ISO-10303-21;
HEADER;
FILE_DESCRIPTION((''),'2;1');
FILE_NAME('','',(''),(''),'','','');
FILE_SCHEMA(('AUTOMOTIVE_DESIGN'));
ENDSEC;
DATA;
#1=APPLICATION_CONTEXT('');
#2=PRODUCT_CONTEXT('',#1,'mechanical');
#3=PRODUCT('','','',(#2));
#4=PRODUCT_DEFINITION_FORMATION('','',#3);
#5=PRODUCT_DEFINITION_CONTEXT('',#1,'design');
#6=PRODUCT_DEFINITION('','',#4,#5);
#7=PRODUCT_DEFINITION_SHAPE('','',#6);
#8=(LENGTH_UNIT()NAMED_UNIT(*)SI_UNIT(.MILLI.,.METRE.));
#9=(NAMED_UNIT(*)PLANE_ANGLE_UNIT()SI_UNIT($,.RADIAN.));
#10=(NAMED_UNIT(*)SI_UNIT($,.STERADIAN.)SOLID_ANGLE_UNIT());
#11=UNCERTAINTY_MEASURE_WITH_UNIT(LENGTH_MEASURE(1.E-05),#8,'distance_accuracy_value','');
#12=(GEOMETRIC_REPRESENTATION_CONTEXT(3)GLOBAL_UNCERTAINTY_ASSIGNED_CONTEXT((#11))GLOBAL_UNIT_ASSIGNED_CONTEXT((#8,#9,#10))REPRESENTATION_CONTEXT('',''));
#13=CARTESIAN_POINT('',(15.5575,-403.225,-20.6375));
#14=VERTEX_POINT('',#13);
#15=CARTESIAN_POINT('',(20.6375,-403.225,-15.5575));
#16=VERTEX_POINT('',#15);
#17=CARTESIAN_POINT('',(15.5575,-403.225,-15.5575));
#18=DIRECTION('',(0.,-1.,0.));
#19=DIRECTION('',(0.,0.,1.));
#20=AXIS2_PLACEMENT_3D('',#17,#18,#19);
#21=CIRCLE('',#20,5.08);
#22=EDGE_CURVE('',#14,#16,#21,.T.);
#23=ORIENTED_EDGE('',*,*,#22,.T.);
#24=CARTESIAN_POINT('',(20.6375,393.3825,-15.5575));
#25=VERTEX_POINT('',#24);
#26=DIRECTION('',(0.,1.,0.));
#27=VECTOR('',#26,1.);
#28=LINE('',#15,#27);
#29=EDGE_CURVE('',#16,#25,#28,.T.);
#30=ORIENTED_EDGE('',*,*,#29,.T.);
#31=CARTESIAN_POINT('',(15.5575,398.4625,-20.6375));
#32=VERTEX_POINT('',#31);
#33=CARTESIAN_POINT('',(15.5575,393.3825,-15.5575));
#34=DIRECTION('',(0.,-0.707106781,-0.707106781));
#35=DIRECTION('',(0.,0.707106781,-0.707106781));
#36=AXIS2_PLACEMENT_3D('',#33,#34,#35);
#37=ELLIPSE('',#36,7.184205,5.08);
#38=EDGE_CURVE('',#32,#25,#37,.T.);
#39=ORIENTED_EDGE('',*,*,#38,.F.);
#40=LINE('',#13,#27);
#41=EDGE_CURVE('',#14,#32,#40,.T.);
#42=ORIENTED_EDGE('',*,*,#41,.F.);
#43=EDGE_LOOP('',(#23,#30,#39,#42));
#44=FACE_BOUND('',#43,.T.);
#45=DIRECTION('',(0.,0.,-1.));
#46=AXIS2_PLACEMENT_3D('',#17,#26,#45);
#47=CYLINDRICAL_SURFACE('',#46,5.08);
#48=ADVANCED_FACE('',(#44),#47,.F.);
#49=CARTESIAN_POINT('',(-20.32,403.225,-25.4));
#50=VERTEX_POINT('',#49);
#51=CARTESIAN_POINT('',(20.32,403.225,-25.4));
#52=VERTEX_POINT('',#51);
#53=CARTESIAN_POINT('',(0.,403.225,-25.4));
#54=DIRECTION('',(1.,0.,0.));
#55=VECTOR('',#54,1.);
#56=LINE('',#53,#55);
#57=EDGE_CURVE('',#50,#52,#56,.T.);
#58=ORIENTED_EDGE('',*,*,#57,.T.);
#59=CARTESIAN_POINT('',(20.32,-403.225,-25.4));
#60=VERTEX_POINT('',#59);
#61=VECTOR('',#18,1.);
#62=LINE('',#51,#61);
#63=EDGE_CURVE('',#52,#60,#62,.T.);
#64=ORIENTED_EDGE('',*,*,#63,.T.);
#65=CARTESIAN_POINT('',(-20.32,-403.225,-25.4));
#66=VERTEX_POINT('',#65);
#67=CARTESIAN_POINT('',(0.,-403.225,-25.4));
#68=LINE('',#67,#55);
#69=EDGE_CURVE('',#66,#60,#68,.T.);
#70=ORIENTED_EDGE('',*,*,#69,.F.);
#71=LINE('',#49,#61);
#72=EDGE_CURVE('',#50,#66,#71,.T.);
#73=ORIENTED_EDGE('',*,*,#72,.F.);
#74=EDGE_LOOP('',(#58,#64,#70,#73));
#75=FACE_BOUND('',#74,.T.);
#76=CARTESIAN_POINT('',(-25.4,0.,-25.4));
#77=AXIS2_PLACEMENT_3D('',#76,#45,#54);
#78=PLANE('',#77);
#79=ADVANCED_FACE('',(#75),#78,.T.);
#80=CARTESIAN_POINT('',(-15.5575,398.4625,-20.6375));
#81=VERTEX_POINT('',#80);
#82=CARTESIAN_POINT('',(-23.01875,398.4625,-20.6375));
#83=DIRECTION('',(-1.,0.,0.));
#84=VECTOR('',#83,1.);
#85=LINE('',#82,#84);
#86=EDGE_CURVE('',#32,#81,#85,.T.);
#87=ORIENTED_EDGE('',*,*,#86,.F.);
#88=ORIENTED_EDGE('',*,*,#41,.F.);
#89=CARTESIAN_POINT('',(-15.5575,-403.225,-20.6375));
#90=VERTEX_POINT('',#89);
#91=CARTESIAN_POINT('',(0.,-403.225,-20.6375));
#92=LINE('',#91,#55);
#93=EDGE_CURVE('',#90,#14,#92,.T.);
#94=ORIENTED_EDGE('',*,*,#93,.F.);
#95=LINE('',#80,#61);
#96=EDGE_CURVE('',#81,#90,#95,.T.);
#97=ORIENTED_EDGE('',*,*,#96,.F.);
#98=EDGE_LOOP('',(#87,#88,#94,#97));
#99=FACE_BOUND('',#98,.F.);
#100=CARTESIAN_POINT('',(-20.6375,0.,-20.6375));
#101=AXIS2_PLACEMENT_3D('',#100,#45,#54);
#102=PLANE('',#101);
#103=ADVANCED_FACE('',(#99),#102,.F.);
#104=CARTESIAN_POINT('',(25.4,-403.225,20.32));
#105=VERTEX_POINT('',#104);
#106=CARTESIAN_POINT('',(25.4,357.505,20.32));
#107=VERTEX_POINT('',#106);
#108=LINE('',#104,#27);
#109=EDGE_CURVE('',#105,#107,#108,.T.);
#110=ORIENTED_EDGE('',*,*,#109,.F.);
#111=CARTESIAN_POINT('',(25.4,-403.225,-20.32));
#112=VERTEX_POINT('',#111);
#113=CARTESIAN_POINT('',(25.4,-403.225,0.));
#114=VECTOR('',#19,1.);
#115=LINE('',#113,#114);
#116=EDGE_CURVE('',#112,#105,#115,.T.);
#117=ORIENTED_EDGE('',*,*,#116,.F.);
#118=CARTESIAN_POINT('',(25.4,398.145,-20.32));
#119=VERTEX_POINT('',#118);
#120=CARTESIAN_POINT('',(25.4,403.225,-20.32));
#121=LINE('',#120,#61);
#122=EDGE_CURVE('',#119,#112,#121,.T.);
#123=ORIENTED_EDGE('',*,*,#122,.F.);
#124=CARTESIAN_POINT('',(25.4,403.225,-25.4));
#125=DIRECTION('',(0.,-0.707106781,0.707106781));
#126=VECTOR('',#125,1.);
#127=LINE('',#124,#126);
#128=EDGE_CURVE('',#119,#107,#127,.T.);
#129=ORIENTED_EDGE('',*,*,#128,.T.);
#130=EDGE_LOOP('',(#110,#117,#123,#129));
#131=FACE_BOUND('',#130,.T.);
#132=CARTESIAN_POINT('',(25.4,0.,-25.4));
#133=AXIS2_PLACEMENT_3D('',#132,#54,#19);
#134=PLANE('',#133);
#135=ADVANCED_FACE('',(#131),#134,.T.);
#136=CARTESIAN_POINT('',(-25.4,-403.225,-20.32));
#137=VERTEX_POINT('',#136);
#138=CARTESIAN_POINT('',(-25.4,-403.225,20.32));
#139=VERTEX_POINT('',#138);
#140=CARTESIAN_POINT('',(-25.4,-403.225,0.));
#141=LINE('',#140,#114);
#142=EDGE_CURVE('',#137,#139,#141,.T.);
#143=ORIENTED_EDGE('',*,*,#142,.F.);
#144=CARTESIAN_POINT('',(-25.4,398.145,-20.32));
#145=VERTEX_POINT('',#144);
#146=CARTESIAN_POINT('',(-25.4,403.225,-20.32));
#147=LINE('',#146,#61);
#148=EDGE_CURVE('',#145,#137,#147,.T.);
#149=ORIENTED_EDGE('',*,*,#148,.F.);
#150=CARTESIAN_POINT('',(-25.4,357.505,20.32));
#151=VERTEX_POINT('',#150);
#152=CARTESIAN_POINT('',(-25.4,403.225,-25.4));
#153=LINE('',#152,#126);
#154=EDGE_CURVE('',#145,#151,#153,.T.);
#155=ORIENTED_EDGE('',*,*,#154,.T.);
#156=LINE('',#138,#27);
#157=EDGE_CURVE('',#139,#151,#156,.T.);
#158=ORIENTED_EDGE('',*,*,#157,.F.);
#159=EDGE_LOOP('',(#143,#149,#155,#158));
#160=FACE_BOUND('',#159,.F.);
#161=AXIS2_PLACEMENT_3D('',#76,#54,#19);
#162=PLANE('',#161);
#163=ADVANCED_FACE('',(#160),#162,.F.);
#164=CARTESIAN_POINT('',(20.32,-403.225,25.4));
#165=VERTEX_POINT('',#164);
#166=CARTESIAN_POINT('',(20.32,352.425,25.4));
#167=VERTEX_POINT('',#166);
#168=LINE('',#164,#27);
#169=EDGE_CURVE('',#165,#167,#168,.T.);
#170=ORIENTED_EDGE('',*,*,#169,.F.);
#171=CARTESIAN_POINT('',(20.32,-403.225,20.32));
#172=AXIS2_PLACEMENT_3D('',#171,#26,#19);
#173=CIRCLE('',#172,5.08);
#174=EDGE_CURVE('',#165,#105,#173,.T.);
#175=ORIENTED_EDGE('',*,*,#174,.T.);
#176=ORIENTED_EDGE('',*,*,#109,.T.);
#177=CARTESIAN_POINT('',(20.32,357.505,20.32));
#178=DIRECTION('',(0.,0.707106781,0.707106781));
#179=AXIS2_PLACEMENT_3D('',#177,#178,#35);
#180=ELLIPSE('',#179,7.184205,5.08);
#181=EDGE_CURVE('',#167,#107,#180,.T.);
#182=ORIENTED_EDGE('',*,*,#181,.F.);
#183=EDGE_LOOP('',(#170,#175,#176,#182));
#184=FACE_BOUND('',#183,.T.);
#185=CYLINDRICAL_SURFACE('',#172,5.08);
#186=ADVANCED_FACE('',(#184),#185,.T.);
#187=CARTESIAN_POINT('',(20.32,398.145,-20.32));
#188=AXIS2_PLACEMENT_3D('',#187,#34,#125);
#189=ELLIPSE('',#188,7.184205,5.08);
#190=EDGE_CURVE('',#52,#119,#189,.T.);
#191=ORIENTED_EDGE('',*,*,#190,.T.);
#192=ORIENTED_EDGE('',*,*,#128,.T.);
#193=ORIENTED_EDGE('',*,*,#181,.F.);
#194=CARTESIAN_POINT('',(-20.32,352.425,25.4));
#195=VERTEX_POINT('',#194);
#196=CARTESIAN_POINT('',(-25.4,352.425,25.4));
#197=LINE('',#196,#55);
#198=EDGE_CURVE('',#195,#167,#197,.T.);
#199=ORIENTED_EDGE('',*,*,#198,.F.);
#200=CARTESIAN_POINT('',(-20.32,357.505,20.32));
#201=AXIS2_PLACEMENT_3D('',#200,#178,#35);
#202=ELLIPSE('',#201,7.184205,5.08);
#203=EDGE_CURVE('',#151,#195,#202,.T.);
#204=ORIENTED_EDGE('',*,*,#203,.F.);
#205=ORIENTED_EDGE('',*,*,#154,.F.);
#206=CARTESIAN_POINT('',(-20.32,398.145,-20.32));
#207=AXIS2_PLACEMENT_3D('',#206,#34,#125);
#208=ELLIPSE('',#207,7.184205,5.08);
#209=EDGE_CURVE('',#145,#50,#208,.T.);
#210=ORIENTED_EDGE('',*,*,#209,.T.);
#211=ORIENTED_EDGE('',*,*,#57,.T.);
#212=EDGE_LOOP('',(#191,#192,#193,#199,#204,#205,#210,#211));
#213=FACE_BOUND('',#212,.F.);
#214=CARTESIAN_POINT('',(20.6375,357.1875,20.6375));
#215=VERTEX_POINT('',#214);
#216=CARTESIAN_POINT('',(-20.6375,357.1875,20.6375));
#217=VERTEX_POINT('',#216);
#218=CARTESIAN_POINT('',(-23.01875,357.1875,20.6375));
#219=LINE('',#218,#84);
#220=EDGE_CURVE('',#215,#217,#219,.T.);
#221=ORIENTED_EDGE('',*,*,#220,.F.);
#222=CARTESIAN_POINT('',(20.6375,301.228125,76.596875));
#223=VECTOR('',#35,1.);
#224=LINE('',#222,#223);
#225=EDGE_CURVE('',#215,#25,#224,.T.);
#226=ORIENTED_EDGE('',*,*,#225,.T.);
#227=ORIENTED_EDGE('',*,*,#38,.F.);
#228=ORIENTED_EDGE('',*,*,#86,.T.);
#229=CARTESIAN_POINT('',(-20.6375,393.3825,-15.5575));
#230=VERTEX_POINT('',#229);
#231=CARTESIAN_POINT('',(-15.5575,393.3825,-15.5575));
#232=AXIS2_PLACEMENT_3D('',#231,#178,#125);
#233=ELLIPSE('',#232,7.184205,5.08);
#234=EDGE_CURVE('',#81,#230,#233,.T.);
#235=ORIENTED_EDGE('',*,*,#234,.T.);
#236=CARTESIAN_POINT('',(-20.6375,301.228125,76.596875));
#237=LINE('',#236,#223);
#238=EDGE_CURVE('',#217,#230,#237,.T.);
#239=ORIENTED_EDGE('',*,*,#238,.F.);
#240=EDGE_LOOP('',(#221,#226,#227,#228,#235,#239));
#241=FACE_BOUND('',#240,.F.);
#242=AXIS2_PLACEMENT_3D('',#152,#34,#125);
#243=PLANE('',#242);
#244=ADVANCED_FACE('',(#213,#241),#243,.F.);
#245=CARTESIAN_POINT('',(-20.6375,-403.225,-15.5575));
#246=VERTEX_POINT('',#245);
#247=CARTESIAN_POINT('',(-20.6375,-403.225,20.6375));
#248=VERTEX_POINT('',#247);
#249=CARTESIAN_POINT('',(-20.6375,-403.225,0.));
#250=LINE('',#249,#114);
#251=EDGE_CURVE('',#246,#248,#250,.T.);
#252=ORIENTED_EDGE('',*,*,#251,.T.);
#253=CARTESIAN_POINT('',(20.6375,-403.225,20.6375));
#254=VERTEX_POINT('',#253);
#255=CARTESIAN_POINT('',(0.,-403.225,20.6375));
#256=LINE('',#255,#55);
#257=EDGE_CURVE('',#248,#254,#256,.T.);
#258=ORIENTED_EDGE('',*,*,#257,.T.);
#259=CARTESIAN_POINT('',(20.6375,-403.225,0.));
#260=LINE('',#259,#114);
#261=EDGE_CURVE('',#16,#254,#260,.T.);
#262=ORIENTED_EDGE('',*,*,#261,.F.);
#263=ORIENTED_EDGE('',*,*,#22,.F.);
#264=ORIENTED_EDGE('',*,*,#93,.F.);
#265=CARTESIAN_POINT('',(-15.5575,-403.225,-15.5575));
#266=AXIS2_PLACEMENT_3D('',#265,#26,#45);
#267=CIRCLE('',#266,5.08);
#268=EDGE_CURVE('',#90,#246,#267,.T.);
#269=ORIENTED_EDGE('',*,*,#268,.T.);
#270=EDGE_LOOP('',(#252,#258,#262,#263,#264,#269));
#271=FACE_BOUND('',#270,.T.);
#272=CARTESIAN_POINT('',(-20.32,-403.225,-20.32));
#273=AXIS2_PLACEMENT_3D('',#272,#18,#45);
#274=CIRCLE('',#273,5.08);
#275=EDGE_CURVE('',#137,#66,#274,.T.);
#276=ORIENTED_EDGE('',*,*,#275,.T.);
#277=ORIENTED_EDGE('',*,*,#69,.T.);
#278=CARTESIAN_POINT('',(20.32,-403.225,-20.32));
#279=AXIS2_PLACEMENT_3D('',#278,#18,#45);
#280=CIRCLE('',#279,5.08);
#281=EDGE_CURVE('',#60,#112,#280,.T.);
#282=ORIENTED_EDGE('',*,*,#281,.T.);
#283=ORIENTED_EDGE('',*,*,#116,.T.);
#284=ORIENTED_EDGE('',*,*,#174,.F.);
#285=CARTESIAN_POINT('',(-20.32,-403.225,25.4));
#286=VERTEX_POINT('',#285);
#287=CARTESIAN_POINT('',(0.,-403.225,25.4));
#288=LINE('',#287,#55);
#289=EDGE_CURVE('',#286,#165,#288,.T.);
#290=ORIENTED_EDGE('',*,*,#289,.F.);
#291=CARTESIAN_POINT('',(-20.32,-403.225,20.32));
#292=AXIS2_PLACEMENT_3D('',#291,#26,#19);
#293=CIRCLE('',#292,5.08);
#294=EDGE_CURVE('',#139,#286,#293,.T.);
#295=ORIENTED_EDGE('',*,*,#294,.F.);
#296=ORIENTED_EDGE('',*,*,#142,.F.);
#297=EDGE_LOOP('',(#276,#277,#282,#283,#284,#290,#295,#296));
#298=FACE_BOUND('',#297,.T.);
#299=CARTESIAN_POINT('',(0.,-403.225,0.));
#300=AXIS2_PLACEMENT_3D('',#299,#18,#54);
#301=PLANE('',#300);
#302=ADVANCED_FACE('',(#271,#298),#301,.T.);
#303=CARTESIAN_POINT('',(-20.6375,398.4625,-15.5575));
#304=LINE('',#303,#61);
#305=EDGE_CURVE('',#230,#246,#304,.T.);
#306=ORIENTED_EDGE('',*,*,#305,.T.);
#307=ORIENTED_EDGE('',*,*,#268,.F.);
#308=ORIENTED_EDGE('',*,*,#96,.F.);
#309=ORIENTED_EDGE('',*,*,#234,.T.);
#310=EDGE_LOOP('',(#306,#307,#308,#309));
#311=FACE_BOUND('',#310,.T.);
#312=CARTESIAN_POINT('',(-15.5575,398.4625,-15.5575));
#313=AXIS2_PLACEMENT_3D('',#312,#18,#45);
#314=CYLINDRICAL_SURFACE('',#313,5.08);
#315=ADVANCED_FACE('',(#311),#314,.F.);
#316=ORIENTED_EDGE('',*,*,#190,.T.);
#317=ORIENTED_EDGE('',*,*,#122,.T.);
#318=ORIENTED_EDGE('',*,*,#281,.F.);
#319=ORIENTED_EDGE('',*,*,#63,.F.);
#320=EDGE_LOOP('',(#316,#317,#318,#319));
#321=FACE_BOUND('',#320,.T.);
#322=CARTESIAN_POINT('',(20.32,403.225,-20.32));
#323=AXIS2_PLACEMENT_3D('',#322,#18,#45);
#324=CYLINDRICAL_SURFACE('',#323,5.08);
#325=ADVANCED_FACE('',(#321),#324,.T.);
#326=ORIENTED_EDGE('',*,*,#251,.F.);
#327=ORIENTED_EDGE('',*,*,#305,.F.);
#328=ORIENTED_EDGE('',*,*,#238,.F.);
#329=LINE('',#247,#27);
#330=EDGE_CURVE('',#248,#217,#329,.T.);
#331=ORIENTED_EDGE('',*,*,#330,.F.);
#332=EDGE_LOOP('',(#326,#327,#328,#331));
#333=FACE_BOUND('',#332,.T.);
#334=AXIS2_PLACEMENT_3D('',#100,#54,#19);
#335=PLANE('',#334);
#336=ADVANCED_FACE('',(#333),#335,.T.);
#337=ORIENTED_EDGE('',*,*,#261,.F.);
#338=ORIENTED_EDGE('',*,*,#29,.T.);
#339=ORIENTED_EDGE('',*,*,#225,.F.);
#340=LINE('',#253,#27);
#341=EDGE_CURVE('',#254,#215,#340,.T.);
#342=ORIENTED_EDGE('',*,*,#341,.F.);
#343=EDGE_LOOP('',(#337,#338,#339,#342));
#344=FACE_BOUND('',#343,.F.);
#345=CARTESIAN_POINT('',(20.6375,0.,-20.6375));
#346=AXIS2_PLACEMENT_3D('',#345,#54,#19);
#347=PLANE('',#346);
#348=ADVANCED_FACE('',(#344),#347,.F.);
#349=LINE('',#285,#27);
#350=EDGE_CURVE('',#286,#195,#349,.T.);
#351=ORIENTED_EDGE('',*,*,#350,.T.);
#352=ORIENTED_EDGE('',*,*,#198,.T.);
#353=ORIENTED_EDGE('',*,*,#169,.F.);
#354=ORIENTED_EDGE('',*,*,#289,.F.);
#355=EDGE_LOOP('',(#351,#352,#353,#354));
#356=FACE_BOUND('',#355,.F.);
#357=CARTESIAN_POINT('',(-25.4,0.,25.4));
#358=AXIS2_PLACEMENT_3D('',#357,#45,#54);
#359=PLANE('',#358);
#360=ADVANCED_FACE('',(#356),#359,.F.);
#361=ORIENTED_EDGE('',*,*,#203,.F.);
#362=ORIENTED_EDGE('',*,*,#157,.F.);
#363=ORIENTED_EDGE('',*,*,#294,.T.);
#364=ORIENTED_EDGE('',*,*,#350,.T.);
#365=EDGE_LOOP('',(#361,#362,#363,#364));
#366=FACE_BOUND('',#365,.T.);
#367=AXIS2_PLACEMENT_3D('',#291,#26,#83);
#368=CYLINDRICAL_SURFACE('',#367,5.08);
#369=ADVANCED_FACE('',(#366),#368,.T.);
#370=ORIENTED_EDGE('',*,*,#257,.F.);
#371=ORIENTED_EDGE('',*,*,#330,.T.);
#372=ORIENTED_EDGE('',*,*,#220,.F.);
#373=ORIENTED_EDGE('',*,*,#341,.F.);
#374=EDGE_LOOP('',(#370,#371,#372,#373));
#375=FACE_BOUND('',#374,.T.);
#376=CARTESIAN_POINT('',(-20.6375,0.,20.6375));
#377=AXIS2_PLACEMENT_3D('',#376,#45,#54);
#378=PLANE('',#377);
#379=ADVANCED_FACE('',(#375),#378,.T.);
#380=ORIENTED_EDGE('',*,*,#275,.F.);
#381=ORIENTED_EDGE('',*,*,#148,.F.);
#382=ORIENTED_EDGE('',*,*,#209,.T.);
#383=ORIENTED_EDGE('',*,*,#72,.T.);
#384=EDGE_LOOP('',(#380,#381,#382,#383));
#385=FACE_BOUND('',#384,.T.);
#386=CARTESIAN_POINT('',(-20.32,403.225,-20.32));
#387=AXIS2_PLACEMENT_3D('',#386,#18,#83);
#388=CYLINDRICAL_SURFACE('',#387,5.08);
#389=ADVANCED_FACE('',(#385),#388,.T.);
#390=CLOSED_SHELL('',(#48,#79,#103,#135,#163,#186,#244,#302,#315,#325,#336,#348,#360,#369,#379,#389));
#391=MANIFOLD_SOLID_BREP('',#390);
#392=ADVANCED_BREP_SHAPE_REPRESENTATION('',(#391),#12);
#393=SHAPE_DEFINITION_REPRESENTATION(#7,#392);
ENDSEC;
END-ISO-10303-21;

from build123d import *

# Parameters (mm, degrees)
F0_W     = 50.8
F0_H     = 50.8
F0_W_2   = 41.275
F0_H_2   = 41.275
F1_DEPTH = 403.225
F3_DEPTH = 50.8
F4_R     = 5.08


with BuildPart() as f1:
    # F0 (on Front) → F1 (new body, symmetric)
    with BuildSketch(Plane.XZ):
        Rectangle(F0_W, F0_H)
        Rectangle(F0_W_2, F0_H_2, mode=Mode.SUBTRACT)
    extrude(amount=F1_DEPTH, both=True)

    # F2 (on face) → F3 (cut)
    with BuildSketch(Plane(origin=(-25.4, 0, 0), x_dir=(0, -1, 0), z_dir=(-1, 0, 0))):
        Polygon((-352.425, 25.4), (-403.225, 25.4), (-403.225, -25.4), align=None)
    extrude(amount=-F3_DEPTH, mode=Mode.SUBTRACT)

    # F4
    f4_edges = [f1.edges().sort_by_distance(p)[0] for p in [
        (-25.4, -25.4, 25.4),
        (25.4, -25.4, 25.4),
        (20.6375, -2.38125, -20.6375),
        (-20.6375, -2.38125, -20.6375),
        (-25.4, 0, -25.4),
        (25.4, 0, -25.4),
    ]]
    fillet(f4_edges, radius=F4_R)


solid = f1.part
